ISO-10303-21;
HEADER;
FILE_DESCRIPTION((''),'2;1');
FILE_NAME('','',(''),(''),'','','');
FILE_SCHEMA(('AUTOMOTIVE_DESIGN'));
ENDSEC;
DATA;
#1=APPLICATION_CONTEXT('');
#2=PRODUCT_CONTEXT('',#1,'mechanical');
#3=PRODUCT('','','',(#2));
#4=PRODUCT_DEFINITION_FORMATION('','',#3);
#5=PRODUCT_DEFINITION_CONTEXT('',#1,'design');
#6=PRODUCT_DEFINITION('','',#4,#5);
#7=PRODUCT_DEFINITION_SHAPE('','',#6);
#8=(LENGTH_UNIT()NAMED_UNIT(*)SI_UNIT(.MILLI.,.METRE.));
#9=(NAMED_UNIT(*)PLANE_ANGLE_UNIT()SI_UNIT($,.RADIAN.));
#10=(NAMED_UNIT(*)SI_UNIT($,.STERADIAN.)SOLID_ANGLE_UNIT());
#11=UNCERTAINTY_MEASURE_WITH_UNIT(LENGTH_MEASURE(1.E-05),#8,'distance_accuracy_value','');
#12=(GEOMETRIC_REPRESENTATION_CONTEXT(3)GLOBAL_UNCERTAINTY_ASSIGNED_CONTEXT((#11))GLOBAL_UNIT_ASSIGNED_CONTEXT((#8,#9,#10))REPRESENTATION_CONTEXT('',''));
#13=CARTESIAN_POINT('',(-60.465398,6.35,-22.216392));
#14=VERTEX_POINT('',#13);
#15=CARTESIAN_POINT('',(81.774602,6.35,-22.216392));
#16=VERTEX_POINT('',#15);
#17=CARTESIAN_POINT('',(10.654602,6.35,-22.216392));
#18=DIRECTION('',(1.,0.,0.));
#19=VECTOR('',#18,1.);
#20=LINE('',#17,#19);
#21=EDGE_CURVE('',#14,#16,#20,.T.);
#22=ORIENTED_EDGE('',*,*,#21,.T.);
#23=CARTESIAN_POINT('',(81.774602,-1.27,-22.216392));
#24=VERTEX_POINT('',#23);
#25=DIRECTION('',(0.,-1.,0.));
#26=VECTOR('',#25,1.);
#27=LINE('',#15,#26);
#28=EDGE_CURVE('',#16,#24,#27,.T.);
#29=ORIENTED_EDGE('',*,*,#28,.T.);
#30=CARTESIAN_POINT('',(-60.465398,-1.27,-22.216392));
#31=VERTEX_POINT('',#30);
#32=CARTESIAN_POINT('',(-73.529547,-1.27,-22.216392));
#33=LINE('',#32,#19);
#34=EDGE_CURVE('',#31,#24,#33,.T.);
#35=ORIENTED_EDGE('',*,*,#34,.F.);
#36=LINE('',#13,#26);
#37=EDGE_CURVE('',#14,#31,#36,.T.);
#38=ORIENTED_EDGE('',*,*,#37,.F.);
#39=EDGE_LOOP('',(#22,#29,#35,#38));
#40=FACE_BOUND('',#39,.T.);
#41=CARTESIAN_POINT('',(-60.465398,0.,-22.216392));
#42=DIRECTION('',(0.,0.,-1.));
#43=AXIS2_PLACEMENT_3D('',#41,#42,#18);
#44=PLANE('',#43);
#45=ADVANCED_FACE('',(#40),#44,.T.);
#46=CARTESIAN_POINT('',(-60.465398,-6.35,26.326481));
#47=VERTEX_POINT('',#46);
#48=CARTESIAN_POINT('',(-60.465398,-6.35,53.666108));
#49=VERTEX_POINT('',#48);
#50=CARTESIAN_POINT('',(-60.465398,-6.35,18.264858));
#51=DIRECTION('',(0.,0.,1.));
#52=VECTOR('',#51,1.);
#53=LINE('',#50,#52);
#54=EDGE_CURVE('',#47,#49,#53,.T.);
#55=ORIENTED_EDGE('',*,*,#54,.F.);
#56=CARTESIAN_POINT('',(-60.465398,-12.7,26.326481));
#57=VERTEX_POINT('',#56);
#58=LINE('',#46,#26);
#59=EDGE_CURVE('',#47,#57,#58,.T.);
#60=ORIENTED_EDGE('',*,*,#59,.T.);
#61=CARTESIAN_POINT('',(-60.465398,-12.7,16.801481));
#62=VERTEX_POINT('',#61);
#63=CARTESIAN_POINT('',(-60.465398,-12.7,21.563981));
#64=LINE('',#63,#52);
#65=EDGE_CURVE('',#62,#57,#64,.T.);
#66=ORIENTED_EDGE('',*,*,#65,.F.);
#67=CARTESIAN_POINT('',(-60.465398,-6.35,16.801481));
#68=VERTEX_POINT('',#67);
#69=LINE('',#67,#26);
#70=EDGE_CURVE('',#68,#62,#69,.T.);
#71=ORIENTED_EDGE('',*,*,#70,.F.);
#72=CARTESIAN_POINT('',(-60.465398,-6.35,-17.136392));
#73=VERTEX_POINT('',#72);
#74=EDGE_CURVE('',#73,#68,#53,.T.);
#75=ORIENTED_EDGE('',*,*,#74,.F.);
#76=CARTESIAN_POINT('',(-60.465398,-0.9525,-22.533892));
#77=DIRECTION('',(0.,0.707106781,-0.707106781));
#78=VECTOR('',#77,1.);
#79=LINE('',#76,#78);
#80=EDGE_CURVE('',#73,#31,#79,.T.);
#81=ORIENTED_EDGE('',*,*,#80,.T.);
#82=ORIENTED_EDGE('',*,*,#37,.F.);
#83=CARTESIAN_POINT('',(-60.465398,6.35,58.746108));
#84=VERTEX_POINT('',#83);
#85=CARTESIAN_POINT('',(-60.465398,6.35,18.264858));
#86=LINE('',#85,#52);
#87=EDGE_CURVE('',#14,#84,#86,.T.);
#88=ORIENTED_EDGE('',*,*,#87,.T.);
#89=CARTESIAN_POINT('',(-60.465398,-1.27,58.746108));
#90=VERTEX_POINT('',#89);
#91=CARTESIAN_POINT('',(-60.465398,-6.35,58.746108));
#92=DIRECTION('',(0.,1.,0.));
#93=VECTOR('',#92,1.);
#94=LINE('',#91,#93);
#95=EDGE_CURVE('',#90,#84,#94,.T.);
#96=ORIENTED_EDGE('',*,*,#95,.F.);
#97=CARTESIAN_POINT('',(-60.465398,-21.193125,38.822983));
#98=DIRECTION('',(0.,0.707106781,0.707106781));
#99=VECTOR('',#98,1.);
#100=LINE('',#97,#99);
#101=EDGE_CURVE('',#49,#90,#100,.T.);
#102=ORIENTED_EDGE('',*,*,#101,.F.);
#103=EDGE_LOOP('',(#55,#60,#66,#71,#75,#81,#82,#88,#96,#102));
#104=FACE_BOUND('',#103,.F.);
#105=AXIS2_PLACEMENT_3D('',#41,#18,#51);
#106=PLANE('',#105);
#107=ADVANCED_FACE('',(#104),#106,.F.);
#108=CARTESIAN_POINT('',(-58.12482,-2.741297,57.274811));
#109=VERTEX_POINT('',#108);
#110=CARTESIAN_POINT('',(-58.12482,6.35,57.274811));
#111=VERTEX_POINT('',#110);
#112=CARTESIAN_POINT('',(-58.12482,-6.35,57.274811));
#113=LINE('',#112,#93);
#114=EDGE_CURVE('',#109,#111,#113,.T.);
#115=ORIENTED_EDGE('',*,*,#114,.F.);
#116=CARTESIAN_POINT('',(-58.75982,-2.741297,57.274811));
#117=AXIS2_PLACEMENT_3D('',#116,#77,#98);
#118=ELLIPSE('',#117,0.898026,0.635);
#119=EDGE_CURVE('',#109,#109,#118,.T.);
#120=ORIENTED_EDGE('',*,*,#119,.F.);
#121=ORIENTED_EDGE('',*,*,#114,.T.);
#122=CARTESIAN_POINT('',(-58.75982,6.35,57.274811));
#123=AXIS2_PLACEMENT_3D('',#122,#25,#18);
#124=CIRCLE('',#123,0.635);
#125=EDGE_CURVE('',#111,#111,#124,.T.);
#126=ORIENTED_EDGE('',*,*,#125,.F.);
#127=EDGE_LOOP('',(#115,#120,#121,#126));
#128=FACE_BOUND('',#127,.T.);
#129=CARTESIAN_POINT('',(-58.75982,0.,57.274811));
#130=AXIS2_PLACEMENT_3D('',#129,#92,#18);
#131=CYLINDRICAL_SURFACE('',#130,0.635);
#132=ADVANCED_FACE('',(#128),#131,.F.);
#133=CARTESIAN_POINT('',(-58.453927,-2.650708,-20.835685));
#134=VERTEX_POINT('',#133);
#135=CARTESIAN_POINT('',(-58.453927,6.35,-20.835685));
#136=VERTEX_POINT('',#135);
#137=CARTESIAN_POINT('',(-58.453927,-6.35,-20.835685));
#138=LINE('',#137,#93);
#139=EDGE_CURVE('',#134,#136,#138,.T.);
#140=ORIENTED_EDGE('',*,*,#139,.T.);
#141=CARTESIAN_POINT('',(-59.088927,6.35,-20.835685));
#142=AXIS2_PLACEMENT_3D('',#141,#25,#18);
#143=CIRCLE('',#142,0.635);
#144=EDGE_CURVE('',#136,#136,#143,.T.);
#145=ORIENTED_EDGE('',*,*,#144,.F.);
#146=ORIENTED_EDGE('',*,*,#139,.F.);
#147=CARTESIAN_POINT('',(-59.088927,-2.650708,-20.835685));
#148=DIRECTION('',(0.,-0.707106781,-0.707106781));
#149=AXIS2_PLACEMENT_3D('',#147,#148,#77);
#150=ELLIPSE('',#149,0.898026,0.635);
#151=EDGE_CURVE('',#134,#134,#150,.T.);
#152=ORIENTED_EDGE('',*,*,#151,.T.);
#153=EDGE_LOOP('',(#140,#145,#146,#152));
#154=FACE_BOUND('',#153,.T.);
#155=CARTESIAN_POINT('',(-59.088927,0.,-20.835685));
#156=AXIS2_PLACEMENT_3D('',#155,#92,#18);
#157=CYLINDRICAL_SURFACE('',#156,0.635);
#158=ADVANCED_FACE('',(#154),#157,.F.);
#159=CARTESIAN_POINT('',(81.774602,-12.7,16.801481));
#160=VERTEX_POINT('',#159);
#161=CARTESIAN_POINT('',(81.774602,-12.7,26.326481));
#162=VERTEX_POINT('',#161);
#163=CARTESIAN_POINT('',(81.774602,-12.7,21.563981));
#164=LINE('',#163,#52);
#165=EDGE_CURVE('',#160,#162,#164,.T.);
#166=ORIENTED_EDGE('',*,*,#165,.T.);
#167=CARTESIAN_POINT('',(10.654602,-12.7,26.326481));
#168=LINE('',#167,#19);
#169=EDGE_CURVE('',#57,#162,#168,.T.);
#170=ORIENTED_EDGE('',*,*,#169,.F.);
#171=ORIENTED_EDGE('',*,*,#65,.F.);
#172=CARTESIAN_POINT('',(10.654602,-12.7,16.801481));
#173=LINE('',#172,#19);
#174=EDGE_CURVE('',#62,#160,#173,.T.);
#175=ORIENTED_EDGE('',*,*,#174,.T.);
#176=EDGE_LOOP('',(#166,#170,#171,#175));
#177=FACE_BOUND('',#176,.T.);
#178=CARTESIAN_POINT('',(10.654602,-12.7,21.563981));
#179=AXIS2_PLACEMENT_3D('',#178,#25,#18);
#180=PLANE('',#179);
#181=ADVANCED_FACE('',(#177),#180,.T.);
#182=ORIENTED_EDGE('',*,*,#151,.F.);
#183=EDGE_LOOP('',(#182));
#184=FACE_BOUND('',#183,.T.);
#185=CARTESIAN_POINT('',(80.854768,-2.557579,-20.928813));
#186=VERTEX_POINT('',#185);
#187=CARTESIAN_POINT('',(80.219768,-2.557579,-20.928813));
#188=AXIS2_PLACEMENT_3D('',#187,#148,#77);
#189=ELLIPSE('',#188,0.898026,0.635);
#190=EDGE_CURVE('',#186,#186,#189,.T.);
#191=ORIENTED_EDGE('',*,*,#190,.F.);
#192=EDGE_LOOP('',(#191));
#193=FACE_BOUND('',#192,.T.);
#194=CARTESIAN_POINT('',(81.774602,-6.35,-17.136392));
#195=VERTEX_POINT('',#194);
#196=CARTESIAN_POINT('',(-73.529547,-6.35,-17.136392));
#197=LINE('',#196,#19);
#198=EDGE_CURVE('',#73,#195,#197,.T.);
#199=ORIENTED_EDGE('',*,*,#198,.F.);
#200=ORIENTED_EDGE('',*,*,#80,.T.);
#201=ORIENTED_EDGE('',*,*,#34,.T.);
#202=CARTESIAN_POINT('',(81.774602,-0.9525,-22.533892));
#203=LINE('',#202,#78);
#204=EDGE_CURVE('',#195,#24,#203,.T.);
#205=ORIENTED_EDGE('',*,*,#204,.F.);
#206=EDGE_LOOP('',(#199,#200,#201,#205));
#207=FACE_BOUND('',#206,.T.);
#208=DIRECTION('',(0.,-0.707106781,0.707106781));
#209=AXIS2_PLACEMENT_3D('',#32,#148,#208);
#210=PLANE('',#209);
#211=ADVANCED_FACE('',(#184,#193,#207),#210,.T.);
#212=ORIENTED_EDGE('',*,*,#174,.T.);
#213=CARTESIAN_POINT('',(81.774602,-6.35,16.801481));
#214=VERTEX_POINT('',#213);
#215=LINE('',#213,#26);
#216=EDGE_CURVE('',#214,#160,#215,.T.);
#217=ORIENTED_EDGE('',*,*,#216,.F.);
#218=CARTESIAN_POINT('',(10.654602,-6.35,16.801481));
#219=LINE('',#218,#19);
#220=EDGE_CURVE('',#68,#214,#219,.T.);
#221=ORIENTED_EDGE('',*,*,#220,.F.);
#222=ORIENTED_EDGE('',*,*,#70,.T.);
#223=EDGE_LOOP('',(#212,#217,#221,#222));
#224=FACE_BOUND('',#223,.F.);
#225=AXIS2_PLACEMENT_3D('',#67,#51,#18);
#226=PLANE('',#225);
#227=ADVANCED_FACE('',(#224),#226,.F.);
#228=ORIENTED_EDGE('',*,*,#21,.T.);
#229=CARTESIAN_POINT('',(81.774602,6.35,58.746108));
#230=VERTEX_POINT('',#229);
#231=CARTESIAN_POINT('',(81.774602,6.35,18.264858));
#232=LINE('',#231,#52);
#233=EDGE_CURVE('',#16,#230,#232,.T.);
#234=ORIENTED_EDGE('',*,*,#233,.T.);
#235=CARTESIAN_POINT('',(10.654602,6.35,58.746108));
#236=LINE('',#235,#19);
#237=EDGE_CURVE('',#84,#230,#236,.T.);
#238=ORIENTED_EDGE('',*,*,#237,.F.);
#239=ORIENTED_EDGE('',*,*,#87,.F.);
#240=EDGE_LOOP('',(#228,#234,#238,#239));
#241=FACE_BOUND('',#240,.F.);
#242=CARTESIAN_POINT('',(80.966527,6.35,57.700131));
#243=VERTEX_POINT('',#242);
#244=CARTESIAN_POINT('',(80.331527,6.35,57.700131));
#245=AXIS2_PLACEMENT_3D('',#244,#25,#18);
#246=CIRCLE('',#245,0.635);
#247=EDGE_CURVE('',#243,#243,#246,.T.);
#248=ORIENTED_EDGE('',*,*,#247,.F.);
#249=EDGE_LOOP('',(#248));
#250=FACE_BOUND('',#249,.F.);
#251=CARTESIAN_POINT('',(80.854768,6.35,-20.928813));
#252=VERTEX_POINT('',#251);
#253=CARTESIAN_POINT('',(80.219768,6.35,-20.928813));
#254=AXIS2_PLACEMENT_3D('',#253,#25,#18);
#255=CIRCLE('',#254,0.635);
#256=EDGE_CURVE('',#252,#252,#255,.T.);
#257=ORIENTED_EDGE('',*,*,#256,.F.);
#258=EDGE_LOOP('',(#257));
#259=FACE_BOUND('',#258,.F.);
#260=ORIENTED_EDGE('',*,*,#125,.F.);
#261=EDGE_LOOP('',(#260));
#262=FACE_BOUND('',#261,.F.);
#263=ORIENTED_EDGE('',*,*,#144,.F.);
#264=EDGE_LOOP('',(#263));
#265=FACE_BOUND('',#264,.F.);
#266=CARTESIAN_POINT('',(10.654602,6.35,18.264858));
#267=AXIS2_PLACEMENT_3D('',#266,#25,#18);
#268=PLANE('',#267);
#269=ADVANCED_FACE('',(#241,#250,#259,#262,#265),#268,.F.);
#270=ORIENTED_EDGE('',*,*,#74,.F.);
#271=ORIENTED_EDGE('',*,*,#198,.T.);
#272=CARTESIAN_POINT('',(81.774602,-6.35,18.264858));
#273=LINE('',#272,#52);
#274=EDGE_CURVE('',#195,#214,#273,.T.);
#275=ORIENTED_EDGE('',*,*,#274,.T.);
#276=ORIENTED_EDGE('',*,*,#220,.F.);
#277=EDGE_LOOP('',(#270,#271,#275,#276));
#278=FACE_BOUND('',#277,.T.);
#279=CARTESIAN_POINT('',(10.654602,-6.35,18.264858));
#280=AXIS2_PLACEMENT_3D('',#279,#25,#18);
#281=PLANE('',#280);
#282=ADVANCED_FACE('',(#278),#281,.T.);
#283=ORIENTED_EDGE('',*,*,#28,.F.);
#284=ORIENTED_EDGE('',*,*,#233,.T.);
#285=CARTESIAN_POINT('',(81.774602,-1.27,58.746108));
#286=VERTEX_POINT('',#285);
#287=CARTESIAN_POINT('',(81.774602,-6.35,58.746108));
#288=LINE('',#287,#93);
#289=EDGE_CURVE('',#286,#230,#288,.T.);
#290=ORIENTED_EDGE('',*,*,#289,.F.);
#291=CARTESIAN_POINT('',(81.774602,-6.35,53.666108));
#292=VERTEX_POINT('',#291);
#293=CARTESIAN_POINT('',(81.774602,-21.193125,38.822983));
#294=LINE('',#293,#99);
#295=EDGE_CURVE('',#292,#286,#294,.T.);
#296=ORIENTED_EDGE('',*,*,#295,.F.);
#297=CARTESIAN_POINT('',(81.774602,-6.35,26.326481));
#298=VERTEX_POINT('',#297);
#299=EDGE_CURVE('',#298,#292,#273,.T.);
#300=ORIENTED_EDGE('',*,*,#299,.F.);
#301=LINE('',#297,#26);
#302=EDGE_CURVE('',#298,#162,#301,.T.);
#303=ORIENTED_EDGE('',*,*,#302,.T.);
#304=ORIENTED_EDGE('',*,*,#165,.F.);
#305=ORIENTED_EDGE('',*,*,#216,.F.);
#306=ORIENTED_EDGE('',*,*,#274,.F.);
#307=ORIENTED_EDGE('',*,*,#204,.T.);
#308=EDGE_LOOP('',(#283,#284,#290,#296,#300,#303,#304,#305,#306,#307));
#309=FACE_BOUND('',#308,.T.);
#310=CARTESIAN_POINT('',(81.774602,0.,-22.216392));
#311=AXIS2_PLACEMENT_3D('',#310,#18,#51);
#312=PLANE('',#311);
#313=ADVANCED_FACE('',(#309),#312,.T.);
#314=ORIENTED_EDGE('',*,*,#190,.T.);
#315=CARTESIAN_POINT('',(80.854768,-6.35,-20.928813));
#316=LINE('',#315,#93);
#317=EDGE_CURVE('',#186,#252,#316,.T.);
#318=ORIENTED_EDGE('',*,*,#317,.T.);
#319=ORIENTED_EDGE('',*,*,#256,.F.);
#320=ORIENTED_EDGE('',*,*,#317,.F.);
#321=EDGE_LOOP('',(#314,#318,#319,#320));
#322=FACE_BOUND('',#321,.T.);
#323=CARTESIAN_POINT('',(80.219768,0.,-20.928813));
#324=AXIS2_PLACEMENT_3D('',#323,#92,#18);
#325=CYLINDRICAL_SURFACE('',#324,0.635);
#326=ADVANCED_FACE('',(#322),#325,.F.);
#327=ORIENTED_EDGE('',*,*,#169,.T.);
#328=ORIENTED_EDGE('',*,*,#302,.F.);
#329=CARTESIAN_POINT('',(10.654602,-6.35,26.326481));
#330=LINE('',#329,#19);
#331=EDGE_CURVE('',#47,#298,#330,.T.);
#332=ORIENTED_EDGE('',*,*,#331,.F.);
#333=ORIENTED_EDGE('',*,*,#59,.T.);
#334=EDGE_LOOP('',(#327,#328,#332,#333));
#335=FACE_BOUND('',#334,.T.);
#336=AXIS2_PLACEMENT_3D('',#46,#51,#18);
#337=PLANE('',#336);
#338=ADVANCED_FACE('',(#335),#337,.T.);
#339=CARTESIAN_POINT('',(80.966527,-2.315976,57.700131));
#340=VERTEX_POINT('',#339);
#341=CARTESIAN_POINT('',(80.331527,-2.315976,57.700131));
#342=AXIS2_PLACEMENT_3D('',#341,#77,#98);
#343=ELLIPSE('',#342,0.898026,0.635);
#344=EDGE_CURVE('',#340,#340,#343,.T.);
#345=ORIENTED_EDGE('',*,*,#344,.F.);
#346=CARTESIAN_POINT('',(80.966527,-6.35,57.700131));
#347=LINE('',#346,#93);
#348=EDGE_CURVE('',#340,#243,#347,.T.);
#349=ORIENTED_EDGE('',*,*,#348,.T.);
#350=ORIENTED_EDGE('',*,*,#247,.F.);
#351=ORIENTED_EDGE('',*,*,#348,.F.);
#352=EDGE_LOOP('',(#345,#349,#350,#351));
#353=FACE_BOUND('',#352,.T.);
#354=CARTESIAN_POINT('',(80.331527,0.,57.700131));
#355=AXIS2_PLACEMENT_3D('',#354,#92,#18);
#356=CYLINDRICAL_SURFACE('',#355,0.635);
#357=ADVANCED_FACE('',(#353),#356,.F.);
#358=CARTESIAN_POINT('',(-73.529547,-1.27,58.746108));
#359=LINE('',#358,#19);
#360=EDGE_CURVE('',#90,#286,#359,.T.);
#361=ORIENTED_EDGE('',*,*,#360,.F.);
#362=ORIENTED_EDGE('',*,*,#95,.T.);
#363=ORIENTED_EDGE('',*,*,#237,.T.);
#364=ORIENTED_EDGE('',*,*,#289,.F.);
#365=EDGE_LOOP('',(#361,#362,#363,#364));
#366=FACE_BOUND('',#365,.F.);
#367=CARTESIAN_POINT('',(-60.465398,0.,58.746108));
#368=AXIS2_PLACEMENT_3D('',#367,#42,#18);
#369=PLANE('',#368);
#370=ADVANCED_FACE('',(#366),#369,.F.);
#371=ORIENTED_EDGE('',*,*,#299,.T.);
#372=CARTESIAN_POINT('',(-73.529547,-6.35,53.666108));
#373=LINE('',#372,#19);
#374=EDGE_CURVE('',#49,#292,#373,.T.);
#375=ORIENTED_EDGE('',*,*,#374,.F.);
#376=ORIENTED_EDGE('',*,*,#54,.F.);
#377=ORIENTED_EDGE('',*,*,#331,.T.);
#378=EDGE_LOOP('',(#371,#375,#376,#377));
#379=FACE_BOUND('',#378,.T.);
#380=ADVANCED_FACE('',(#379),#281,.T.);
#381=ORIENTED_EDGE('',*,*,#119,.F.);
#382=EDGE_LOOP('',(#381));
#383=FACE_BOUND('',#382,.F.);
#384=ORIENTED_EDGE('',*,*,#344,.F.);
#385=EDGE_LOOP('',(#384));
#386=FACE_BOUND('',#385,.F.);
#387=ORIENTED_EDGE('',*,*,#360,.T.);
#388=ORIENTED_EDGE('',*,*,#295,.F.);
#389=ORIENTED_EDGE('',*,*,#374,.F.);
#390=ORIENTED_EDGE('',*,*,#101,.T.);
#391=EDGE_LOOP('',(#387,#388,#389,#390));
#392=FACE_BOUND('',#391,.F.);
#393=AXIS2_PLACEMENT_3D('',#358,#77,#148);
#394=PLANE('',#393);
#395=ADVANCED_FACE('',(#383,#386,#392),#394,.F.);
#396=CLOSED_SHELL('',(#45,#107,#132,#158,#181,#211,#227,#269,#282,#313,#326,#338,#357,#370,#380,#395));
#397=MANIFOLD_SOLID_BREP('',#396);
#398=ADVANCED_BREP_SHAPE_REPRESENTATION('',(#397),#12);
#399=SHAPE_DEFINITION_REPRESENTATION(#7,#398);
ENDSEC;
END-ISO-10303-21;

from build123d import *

# Parameters (mm, degrees)
F0_W        = 142.24
F0_H        = 80.9625
F0_R        = 0.635
F1_DEPTH    = 6.35
F2_T1_DEPTH = 168.3682991577
F3_W        = 142.24
F3_H        = 9.525
F4_DEPTH    = 6.35


# Not quite as in the source:
# - a fillet or chamfer that OpenCascade refuses, or shapes differently, is made with other operations: its cross-section is extruded or revolved along the edge and cut away or added


with BuildPart() as f1:
    # F0 (on Front) → F1 (new body, symmetric)
    with BuildSketch(Plane.XZ):
        with Locations((10.6546021998, 18.2648575297)):
            Rectangle(F0_W, F0_H)
        with Locations((-59.0889267623, -20.8356846124)):
            Circle(F0_R, mode=Mode.SUBTRACT)
        with Locations((80.2197679877, -20.9288131446)):
            Circle(F0_R, mode=Mode.SUBTRACT)
        with Locations((-58.7598197162, 57.2748109698)):
            Circle(F0_R, mode=Mode.SUBTRACT)
        with Locations((80.3315266967, 57.7001310885)):
            Circle(F0_R, mode=Mode.SUBTRACT)
    extrude(amount=F1_DEPTH, both=True)

    # F2: chamfer of 5.08 on 2 edges, made by hand

    # F2_s2 → F2_t1 (cut)
    with BuildSketch(Plane.YZ.offset(-73.5295473791)):
        Polygon((-1.27, -22.2163924703), (-6.35, -17.1363924703), (-6.35, -22.2163924703), align=None)
        Polygon((-1.27, 58.7461075297), (-6.35, 53.6661075297), (-6.35, 58.7461075297), align=None)
    extrude(amount=F2_T1_DEPTH, mode=Mode.SUBTRACT)

    # F3 (on face) → F4 (join)
    with BuildSketch(Plane.XZ.offset(6.35)):
        with Locations((10.6546021998, 21.5639811352)):
            Rectangle(F3_W, F3_H)
    extrude(amount=F4_DEPTH)


solid = f1.part
